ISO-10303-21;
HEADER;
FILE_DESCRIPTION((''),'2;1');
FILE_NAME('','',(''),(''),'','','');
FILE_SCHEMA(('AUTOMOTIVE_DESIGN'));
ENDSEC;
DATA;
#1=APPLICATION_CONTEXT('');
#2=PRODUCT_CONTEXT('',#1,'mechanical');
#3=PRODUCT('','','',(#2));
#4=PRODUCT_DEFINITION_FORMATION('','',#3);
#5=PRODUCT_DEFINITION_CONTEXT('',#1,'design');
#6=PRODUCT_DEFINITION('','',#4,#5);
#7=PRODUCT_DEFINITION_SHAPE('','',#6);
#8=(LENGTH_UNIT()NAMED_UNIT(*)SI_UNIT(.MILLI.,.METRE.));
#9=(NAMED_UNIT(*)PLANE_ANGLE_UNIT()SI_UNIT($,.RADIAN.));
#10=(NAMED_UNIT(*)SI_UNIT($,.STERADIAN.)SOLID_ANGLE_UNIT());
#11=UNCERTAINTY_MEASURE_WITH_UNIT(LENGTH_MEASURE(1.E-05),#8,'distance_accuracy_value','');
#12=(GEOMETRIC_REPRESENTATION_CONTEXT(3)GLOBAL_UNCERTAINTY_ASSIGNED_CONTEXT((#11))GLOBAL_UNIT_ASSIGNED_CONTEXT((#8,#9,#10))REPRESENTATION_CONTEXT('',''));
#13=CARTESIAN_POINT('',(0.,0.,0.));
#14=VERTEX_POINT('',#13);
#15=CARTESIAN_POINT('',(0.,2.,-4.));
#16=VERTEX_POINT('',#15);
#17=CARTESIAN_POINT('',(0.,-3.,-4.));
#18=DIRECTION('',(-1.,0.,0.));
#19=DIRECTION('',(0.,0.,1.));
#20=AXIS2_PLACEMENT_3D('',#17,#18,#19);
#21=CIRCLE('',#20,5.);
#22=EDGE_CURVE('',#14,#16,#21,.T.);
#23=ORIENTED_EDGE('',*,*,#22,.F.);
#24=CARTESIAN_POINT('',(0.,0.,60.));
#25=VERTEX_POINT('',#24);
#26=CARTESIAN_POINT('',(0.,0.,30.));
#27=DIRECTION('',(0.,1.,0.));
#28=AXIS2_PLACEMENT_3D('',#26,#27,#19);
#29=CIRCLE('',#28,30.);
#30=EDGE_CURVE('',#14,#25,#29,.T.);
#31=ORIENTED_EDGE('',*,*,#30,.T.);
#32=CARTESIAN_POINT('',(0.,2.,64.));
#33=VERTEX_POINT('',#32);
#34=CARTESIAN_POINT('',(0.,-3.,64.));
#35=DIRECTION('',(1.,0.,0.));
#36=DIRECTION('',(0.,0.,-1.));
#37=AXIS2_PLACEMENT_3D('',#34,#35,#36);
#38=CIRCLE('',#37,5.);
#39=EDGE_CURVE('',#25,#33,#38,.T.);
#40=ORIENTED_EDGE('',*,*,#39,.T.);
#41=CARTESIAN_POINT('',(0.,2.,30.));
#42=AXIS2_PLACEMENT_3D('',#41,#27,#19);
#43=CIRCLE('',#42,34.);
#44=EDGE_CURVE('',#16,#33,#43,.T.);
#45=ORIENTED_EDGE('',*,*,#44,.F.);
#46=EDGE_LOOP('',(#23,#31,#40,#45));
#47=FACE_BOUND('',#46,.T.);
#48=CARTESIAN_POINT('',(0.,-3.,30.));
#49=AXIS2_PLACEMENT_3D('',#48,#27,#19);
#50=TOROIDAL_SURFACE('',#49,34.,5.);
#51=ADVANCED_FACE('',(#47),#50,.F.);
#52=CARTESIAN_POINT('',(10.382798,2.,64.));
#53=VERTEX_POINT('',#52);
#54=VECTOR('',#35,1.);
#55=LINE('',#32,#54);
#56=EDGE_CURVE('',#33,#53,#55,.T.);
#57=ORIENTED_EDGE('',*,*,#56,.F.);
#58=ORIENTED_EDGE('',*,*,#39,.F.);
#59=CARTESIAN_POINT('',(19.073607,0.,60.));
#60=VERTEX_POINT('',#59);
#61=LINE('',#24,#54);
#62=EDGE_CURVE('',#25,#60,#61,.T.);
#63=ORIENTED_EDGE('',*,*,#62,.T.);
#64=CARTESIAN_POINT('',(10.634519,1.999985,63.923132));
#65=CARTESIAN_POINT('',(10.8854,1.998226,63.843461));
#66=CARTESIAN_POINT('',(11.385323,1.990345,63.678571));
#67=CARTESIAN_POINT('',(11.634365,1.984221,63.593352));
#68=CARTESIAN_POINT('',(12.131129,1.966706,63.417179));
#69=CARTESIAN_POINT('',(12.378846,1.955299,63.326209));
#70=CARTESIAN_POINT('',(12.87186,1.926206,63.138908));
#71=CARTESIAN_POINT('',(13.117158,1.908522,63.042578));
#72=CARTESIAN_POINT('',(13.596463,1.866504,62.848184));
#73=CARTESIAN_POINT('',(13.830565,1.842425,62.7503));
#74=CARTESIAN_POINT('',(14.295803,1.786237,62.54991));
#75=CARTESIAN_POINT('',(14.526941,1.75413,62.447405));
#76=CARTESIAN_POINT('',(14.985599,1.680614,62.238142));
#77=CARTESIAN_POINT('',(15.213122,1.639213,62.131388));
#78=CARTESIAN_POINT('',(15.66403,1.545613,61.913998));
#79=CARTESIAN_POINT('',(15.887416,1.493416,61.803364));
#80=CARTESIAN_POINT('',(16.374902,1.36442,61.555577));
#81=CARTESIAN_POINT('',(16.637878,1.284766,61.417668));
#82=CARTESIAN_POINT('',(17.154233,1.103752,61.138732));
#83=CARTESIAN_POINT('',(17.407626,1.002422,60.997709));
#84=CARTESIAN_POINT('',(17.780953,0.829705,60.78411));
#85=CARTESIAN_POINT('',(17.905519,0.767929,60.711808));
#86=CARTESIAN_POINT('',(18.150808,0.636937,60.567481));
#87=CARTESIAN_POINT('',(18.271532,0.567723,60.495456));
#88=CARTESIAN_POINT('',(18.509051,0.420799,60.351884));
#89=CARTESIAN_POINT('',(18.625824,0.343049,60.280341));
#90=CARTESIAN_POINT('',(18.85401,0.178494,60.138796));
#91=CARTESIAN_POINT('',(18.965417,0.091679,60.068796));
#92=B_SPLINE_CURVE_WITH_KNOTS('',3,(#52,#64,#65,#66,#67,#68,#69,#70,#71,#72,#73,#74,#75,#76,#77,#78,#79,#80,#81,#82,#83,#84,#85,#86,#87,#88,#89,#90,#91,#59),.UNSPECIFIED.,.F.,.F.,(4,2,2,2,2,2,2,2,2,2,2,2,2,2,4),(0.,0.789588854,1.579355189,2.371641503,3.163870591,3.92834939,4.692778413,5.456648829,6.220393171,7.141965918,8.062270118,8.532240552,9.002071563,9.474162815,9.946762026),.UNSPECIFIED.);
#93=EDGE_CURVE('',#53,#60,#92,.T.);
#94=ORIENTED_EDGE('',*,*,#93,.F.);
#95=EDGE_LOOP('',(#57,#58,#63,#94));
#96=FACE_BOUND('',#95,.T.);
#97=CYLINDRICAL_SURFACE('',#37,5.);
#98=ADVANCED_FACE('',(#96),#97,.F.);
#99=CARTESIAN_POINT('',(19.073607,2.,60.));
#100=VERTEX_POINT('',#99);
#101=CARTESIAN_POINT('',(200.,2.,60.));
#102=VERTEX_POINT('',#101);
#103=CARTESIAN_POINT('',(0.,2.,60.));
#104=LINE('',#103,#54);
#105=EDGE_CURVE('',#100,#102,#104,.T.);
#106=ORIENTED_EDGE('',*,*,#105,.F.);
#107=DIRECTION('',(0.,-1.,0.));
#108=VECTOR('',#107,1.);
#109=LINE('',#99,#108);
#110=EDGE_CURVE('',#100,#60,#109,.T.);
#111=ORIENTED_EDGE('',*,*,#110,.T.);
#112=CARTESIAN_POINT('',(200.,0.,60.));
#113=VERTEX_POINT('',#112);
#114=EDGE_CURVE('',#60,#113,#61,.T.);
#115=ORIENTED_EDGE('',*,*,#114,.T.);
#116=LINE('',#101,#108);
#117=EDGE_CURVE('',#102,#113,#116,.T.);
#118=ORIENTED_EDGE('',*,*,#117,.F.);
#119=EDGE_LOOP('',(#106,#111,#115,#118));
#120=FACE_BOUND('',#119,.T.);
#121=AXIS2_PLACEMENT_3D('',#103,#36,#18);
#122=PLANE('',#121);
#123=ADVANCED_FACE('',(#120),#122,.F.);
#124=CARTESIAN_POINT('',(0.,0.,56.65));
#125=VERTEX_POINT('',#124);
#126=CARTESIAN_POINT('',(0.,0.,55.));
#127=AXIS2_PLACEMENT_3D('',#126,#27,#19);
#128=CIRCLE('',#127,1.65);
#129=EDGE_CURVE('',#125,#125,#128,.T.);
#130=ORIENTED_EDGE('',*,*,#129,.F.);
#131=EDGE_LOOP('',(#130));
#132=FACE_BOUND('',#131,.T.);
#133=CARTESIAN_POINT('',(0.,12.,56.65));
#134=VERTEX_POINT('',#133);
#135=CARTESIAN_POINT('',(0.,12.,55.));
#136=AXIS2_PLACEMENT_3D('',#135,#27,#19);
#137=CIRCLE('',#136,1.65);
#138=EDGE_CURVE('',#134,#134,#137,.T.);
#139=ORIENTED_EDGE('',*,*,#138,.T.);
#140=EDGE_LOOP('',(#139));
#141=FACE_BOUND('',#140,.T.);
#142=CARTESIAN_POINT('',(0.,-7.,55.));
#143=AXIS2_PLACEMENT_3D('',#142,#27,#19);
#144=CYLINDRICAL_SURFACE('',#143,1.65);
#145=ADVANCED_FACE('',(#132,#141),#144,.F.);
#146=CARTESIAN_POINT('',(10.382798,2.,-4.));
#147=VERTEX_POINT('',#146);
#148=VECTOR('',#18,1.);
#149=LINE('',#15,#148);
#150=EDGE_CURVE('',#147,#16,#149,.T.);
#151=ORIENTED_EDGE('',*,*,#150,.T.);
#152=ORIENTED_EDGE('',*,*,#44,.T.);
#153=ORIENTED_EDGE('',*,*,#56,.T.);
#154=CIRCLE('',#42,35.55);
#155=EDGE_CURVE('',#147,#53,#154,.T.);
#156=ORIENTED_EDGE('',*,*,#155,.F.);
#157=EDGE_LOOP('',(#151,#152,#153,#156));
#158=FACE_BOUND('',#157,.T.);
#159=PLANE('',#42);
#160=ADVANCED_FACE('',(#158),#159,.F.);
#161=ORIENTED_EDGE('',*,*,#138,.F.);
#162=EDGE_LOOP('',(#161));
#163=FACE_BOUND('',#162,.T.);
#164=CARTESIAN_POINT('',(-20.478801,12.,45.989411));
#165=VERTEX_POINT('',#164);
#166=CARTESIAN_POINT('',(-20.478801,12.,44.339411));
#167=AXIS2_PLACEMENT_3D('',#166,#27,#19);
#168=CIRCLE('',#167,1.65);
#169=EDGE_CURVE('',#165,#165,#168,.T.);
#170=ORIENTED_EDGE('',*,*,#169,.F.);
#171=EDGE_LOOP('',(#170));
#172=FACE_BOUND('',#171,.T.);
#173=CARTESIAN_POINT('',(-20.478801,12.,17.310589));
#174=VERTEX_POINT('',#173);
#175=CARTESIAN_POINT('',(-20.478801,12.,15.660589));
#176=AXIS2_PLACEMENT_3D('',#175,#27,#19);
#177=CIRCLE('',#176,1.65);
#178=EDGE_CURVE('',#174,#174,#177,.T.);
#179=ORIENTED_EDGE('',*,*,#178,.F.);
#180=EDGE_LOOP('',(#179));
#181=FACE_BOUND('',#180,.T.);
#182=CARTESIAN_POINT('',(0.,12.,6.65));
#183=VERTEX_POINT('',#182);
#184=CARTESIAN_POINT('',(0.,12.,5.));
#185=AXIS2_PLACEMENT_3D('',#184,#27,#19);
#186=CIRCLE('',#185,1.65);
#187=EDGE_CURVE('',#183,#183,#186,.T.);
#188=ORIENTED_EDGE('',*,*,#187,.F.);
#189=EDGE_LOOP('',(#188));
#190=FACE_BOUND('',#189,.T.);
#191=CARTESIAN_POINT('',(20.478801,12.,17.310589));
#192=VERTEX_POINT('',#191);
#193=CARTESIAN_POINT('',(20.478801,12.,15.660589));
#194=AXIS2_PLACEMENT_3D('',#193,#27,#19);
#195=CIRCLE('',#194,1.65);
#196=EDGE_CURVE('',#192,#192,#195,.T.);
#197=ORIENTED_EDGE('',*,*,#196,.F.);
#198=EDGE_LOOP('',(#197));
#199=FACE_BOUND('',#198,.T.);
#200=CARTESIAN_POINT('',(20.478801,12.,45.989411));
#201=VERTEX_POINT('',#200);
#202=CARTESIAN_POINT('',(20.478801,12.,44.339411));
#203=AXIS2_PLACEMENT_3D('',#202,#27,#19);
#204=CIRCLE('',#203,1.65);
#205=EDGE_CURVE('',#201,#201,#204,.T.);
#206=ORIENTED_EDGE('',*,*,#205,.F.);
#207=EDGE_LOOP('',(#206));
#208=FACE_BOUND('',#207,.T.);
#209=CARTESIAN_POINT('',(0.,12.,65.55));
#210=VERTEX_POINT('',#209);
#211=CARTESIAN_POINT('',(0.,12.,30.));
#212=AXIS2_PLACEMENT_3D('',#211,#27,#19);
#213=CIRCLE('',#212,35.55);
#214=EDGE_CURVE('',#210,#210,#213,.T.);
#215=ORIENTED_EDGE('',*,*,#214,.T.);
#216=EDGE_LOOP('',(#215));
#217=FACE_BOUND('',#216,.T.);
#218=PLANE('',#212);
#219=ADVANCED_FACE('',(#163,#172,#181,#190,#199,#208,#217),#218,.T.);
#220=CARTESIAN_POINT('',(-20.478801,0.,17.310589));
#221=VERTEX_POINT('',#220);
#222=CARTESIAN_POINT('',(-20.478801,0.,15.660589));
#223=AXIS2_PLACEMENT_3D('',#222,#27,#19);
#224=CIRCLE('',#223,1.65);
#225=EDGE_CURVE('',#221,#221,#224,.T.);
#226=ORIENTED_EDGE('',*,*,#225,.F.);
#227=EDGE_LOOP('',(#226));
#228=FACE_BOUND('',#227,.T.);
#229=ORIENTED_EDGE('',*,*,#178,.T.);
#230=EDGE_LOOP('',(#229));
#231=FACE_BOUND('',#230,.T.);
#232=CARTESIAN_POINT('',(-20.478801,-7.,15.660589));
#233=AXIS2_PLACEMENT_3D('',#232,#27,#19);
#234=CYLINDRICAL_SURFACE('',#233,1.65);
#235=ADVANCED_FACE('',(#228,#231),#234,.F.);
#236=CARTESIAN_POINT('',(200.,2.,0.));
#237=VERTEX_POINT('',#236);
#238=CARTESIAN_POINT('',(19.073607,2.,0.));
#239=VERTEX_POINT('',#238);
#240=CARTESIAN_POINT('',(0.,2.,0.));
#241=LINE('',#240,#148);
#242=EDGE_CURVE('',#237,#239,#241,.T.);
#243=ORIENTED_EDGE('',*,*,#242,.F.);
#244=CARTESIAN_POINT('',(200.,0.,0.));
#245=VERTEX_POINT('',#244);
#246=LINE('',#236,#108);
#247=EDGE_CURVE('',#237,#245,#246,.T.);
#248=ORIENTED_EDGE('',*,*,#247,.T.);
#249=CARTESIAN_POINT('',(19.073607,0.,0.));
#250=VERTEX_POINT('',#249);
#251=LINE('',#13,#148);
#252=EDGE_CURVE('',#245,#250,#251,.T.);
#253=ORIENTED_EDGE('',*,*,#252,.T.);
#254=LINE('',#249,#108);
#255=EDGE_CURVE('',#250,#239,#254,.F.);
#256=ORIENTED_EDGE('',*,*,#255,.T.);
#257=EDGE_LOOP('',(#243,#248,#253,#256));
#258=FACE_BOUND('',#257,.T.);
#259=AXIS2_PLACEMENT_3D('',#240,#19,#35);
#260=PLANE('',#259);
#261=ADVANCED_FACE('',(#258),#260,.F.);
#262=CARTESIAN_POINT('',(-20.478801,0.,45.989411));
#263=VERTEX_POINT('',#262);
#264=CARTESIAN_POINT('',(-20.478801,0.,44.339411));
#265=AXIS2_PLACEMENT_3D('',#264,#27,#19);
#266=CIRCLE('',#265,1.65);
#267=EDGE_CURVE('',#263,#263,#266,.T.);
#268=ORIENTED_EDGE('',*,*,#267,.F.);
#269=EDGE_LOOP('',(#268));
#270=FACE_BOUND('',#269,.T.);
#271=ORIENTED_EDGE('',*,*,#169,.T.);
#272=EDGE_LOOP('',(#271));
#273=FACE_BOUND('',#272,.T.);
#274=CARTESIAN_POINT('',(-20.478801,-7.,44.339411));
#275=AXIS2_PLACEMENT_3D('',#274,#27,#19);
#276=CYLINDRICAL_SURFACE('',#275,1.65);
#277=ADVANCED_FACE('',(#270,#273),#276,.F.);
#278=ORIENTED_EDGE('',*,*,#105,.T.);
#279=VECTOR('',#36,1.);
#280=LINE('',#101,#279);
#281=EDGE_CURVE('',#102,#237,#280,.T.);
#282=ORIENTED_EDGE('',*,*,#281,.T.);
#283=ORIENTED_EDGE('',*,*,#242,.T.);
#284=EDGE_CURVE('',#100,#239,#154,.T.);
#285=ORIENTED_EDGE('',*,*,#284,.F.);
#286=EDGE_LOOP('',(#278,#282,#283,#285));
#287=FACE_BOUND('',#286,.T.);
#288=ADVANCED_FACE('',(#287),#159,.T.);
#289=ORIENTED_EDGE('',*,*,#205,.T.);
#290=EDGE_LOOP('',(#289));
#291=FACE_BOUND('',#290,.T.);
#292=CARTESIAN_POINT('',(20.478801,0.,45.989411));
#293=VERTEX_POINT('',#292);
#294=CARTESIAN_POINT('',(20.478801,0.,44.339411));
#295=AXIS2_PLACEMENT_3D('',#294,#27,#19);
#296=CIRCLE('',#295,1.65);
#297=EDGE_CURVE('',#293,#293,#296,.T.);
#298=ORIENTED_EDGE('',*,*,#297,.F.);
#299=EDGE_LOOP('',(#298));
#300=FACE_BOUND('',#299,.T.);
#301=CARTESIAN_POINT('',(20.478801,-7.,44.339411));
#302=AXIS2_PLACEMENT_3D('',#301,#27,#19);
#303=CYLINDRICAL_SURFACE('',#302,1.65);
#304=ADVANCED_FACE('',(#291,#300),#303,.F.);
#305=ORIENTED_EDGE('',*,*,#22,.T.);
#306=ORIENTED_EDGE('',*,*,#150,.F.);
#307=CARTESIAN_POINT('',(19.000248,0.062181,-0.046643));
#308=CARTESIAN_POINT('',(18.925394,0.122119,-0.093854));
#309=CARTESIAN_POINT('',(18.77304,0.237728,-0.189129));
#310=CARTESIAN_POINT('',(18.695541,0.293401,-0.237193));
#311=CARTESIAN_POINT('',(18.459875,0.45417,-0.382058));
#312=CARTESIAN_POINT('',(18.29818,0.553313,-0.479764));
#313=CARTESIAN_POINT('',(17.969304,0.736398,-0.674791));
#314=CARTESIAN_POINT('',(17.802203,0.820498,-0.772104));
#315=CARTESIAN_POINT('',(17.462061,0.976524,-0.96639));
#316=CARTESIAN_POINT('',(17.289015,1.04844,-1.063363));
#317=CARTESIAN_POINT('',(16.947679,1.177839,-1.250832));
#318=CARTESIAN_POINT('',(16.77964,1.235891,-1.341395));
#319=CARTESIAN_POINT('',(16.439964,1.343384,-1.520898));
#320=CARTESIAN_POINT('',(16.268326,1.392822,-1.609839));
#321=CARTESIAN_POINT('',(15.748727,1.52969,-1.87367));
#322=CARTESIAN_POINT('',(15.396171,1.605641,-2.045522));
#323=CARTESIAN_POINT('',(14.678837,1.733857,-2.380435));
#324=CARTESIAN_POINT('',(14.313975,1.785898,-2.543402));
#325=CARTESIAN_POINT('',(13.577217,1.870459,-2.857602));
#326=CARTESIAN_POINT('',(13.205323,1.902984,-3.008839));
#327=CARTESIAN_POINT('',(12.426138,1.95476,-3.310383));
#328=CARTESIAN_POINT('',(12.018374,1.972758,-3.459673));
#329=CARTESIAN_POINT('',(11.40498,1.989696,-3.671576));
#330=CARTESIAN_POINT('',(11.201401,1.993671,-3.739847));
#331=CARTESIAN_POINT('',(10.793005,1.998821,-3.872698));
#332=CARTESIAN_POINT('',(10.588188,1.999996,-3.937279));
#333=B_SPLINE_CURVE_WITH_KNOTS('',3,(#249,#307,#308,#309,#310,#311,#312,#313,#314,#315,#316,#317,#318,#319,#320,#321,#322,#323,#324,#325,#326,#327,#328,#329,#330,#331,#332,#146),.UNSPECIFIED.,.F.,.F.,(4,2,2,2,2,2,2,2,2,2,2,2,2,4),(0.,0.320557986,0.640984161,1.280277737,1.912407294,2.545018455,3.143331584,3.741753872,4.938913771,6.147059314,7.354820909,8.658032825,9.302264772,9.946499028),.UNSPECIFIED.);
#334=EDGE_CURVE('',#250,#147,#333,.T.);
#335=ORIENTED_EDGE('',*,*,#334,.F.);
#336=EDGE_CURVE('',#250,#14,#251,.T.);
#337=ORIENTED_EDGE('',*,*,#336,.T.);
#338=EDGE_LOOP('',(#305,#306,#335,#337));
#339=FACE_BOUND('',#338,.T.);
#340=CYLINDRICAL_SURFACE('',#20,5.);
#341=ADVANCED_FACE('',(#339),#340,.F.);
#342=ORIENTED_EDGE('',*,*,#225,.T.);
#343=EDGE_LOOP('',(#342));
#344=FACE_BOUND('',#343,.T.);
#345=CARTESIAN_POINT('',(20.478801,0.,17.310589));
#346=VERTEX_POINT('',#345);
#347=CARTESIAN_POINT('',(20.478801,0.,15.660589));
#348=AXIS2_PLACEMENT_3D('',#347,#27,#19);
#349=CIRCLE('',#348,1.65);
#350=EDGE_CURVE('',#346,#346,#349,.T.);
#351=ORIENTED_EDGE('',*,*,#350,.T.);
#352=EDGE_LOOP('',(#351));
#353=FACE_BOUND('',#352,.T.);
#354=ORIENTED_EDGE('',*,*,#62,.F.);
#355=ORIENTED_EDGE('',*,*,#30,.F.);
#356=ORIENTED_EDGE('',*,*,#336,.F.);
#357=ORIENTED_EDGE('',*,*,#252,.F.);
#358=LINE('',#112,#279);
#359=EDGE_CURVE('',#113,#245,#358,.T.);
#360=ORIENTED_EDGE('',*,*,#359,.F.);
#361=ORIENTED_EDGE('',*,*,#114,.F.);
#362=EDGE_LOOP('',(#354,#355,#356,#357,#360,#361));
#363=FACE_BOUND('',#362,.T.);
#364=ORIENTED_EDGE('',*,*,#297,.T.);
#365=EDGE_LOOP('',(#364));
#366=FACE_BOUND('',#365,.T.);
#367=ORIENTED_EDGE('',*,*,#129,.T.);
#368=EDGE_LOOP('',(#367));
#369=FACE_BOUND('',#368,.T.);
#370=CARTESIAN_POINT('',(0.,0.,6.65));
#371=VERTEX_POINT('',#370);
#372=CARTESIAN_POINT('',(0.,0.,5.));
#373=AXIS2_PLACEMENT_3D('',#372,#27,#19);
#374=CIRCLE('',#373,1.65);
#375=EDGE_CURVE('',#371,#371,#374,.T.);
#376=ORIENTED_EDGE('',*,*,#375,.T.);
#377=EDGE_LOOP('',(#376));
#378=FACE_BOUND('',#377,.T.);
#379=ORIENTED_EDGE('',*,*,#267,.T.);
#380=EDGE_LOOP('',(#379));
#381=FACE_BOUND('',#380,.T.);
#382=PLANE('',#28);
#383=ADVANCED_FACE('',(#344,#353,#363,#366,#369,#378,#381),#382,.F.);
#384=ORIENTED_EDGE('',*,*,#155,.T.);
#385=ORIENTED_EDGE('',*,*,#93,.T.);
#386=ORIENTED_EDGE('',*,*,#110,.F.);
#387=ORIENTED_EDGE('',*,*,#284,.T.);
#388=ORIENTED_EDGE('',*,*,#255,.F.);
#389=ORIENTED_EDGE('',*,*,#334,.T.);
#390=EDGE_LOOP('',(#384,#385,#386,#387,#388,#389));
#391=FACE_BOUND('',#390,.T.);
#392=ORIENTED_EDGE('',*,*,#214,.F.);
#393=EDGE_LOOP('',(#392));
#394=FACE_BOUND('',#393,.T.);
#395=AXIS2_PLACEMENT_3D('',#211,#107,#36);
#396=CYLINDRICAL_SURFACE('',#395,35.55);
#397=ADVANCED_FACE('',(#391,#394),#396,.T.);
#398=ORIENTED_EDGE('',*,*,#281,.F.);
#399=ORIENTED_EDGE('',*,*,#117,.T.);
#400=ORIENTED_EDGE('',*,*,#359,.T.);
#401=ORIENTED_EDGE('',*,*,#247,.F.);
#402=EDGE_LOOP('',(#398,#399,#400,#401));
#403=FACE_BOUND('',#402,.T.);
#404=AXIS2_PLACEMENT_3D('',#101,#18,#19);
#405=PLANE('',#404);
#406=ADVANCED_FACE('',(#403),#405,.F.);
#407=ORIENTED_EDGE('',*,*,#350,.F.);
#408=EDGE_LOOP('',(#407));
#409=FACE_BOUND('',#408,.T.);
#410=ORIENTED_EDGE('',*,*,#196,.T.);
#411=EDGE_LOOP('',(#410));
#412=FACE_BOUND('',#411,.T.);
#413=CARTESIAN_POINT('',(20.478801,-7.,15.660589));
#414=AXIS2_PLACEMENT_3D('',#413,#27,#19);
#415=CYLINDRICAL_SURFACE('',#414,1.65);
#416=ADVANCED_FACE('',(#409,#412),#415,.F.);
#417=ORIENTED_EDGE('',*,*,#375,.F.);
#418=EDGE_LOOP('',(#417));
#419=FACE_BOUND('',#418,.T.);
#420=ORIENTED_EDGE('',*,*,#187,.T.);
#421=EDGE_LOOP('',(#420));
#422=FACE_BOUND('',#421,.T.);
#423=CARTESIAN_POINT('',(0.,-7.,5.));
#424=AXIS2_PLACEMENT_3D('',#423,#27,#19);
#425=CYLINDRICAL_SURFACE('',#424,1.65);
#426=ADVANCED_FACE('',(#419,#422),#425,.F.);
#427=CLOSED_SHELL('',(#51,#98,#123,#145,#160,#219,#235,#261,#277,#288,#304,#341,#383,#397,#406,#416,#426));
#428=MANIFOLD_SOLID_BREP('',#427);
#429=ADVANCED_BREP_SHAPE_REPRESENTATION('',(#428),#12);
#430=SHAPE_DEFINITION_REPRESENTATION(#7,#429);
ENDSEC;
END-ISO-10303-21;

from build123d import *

# Parameters (mm, degrees)
BOSS_EXTRUDE1_DEPTH = 2
SKETCH3_R           = 35.55
BOSS_EXTRUDE2_DEPTH = 10
FILLET1_R           = 5
SKETCH4_R           = 1.65
CUT_EXTRUDE1_DEPTH  = 19


with BuildPart() as part:
    # Sketch2 → Boss-Extrude1 (new body)
    with BuildSketch(Plane(origin=(0, 0, 0), x_dir=(1, 0, 0), z_dir=(0, 1, 0))):
        with BuildLine():
            Line((0, 0), (200, 0))
            Line((200, 0), (200, -60))
            Line((200, -60), (0, -60))
            ThreePointArc((0, -60), (-30, -30), (0, 0))
        make_face()
    extrude(amount=BOSS_EXTRUDE1_DEPTH)

    # Sketch3 → Boss-Extrude2 (add)
    with BuildSketch(Plane(origin=(0, 2, 0), x_dir=(1, 0, 0), z_dir=(0, 1, 0))):
        with Locations(Location((0, -30, 0), (0, 0, 57.552333234))):
            Circle(SKETCH3_R)
    extrude(amount=BOSS_EXTRUDE2_DEPTH)

    # Fillet1
    # the kernel refuses this fillet: 5 mm, written as the material it adds along each edge
    with BuildSketch(Plane(origin=(0, 2, 0), x_dir=(0, -1, 0), z_dir=(1, 0, 0))) as fillet1_piece_1_section:
        with BuildLine():
            CenterArc((5, 4), FILLET1_R, 180, 53.130102354)
            Line((0, 4), (0, 0))
            Line((0, 0), (2, 0))
        make_face()
    fillet1_piece_1 = extrude(amount=29.07360742, mode=Mode.PRIVATE)
    fillet1_piece_1 = fillet1_piece_1 & Plane(origin=(0, 2, 30), x_dir=(0.5365290413395907, 0, -0.8438818565410799), z_dir=(0, -1, 0)) * Cylinder(35.55, 75, mode=Mode.PRIVATE)
    add(fillet1_piece_1)
    with BuildSketch(Plane(origin=(29.07360742, 2, 60), x_dir=(0, 0, 1), z_dir=(-1, 0, 0))) as fillet1_piece_2_section:
        with BuildLine():
            CenterArc((4, -5), FILLET1_R, 90, 53.130102354)
            Line((0, -2), (0, 0))
            Line((0, 0), (4, 0))
        make_face()
    fillet1_piece_2 = extrude(amount=29.07360742, mode=Mode.PRIVATE)
    fillet1_piece_2 = fillet1_piece_2 & Plane(origin=(0, 2, 30), x_dir=(0.5365290413395907, 0, -0.8438818565410799), z_dir=(0, -1, 0)) * Cylinder(35.55, 75, mode=Mode.PRIVATE)
    add(fillet1_piece_2)
    with BuildSketch(Plane(origin=(0, 2, 30), x_dir=(0, 0, 1), z_dir=(1, 0, 0))) as fillet1_piece_3:
        with BuildLine():
            CenterArc((34, 5), FILLET1_R, 216.869897646, 53.130102354)
            Line((34, 0), (30, 0))
            Line((30, 0), (30, 2))
        make_face()
    revolve(axis=Axis((0, 2, 30), (0, -1, 0)), revolution_arc=180)

    # Sketch4 → Cut-Extrude1 (cut)
    with BuildSketch(Plane(origin=(0, 12, 0), x_dir=(1, 0, 0), z_dir=(0, 1, 0))):
        with Locations(Location((0, -5, 0), (0, 0, 270))):
            Circle(SKETCH4_R)
        with Locations(Location((0, -55, 0), (0, 0, 270))):
            Circle(SKETCH4_R)
        with Locations(Location((-20.478801107, -15.660589091, 0), (0, 0, 270))):
            Circle(SKETCH4_R)
        with Locations(Location((-20.478801107, -44.339410909, 0), (0, 0, 270))):
            Circle(SKETCH4_R)
        with Locations(Location((20.478801107, -15.660589091, 0), (0, 0, 270))):
            Circle(SKETCH4_R)
        with Locations(Location((20.478801107, -44.339410909, 0), (0, 0, 270))):
            Circle(SKETCH4_R)
    extrude(amount=-CUT_EXTRUDE1_DEPTH, mode=Mode.SUBTRACT)


solid = part.part
